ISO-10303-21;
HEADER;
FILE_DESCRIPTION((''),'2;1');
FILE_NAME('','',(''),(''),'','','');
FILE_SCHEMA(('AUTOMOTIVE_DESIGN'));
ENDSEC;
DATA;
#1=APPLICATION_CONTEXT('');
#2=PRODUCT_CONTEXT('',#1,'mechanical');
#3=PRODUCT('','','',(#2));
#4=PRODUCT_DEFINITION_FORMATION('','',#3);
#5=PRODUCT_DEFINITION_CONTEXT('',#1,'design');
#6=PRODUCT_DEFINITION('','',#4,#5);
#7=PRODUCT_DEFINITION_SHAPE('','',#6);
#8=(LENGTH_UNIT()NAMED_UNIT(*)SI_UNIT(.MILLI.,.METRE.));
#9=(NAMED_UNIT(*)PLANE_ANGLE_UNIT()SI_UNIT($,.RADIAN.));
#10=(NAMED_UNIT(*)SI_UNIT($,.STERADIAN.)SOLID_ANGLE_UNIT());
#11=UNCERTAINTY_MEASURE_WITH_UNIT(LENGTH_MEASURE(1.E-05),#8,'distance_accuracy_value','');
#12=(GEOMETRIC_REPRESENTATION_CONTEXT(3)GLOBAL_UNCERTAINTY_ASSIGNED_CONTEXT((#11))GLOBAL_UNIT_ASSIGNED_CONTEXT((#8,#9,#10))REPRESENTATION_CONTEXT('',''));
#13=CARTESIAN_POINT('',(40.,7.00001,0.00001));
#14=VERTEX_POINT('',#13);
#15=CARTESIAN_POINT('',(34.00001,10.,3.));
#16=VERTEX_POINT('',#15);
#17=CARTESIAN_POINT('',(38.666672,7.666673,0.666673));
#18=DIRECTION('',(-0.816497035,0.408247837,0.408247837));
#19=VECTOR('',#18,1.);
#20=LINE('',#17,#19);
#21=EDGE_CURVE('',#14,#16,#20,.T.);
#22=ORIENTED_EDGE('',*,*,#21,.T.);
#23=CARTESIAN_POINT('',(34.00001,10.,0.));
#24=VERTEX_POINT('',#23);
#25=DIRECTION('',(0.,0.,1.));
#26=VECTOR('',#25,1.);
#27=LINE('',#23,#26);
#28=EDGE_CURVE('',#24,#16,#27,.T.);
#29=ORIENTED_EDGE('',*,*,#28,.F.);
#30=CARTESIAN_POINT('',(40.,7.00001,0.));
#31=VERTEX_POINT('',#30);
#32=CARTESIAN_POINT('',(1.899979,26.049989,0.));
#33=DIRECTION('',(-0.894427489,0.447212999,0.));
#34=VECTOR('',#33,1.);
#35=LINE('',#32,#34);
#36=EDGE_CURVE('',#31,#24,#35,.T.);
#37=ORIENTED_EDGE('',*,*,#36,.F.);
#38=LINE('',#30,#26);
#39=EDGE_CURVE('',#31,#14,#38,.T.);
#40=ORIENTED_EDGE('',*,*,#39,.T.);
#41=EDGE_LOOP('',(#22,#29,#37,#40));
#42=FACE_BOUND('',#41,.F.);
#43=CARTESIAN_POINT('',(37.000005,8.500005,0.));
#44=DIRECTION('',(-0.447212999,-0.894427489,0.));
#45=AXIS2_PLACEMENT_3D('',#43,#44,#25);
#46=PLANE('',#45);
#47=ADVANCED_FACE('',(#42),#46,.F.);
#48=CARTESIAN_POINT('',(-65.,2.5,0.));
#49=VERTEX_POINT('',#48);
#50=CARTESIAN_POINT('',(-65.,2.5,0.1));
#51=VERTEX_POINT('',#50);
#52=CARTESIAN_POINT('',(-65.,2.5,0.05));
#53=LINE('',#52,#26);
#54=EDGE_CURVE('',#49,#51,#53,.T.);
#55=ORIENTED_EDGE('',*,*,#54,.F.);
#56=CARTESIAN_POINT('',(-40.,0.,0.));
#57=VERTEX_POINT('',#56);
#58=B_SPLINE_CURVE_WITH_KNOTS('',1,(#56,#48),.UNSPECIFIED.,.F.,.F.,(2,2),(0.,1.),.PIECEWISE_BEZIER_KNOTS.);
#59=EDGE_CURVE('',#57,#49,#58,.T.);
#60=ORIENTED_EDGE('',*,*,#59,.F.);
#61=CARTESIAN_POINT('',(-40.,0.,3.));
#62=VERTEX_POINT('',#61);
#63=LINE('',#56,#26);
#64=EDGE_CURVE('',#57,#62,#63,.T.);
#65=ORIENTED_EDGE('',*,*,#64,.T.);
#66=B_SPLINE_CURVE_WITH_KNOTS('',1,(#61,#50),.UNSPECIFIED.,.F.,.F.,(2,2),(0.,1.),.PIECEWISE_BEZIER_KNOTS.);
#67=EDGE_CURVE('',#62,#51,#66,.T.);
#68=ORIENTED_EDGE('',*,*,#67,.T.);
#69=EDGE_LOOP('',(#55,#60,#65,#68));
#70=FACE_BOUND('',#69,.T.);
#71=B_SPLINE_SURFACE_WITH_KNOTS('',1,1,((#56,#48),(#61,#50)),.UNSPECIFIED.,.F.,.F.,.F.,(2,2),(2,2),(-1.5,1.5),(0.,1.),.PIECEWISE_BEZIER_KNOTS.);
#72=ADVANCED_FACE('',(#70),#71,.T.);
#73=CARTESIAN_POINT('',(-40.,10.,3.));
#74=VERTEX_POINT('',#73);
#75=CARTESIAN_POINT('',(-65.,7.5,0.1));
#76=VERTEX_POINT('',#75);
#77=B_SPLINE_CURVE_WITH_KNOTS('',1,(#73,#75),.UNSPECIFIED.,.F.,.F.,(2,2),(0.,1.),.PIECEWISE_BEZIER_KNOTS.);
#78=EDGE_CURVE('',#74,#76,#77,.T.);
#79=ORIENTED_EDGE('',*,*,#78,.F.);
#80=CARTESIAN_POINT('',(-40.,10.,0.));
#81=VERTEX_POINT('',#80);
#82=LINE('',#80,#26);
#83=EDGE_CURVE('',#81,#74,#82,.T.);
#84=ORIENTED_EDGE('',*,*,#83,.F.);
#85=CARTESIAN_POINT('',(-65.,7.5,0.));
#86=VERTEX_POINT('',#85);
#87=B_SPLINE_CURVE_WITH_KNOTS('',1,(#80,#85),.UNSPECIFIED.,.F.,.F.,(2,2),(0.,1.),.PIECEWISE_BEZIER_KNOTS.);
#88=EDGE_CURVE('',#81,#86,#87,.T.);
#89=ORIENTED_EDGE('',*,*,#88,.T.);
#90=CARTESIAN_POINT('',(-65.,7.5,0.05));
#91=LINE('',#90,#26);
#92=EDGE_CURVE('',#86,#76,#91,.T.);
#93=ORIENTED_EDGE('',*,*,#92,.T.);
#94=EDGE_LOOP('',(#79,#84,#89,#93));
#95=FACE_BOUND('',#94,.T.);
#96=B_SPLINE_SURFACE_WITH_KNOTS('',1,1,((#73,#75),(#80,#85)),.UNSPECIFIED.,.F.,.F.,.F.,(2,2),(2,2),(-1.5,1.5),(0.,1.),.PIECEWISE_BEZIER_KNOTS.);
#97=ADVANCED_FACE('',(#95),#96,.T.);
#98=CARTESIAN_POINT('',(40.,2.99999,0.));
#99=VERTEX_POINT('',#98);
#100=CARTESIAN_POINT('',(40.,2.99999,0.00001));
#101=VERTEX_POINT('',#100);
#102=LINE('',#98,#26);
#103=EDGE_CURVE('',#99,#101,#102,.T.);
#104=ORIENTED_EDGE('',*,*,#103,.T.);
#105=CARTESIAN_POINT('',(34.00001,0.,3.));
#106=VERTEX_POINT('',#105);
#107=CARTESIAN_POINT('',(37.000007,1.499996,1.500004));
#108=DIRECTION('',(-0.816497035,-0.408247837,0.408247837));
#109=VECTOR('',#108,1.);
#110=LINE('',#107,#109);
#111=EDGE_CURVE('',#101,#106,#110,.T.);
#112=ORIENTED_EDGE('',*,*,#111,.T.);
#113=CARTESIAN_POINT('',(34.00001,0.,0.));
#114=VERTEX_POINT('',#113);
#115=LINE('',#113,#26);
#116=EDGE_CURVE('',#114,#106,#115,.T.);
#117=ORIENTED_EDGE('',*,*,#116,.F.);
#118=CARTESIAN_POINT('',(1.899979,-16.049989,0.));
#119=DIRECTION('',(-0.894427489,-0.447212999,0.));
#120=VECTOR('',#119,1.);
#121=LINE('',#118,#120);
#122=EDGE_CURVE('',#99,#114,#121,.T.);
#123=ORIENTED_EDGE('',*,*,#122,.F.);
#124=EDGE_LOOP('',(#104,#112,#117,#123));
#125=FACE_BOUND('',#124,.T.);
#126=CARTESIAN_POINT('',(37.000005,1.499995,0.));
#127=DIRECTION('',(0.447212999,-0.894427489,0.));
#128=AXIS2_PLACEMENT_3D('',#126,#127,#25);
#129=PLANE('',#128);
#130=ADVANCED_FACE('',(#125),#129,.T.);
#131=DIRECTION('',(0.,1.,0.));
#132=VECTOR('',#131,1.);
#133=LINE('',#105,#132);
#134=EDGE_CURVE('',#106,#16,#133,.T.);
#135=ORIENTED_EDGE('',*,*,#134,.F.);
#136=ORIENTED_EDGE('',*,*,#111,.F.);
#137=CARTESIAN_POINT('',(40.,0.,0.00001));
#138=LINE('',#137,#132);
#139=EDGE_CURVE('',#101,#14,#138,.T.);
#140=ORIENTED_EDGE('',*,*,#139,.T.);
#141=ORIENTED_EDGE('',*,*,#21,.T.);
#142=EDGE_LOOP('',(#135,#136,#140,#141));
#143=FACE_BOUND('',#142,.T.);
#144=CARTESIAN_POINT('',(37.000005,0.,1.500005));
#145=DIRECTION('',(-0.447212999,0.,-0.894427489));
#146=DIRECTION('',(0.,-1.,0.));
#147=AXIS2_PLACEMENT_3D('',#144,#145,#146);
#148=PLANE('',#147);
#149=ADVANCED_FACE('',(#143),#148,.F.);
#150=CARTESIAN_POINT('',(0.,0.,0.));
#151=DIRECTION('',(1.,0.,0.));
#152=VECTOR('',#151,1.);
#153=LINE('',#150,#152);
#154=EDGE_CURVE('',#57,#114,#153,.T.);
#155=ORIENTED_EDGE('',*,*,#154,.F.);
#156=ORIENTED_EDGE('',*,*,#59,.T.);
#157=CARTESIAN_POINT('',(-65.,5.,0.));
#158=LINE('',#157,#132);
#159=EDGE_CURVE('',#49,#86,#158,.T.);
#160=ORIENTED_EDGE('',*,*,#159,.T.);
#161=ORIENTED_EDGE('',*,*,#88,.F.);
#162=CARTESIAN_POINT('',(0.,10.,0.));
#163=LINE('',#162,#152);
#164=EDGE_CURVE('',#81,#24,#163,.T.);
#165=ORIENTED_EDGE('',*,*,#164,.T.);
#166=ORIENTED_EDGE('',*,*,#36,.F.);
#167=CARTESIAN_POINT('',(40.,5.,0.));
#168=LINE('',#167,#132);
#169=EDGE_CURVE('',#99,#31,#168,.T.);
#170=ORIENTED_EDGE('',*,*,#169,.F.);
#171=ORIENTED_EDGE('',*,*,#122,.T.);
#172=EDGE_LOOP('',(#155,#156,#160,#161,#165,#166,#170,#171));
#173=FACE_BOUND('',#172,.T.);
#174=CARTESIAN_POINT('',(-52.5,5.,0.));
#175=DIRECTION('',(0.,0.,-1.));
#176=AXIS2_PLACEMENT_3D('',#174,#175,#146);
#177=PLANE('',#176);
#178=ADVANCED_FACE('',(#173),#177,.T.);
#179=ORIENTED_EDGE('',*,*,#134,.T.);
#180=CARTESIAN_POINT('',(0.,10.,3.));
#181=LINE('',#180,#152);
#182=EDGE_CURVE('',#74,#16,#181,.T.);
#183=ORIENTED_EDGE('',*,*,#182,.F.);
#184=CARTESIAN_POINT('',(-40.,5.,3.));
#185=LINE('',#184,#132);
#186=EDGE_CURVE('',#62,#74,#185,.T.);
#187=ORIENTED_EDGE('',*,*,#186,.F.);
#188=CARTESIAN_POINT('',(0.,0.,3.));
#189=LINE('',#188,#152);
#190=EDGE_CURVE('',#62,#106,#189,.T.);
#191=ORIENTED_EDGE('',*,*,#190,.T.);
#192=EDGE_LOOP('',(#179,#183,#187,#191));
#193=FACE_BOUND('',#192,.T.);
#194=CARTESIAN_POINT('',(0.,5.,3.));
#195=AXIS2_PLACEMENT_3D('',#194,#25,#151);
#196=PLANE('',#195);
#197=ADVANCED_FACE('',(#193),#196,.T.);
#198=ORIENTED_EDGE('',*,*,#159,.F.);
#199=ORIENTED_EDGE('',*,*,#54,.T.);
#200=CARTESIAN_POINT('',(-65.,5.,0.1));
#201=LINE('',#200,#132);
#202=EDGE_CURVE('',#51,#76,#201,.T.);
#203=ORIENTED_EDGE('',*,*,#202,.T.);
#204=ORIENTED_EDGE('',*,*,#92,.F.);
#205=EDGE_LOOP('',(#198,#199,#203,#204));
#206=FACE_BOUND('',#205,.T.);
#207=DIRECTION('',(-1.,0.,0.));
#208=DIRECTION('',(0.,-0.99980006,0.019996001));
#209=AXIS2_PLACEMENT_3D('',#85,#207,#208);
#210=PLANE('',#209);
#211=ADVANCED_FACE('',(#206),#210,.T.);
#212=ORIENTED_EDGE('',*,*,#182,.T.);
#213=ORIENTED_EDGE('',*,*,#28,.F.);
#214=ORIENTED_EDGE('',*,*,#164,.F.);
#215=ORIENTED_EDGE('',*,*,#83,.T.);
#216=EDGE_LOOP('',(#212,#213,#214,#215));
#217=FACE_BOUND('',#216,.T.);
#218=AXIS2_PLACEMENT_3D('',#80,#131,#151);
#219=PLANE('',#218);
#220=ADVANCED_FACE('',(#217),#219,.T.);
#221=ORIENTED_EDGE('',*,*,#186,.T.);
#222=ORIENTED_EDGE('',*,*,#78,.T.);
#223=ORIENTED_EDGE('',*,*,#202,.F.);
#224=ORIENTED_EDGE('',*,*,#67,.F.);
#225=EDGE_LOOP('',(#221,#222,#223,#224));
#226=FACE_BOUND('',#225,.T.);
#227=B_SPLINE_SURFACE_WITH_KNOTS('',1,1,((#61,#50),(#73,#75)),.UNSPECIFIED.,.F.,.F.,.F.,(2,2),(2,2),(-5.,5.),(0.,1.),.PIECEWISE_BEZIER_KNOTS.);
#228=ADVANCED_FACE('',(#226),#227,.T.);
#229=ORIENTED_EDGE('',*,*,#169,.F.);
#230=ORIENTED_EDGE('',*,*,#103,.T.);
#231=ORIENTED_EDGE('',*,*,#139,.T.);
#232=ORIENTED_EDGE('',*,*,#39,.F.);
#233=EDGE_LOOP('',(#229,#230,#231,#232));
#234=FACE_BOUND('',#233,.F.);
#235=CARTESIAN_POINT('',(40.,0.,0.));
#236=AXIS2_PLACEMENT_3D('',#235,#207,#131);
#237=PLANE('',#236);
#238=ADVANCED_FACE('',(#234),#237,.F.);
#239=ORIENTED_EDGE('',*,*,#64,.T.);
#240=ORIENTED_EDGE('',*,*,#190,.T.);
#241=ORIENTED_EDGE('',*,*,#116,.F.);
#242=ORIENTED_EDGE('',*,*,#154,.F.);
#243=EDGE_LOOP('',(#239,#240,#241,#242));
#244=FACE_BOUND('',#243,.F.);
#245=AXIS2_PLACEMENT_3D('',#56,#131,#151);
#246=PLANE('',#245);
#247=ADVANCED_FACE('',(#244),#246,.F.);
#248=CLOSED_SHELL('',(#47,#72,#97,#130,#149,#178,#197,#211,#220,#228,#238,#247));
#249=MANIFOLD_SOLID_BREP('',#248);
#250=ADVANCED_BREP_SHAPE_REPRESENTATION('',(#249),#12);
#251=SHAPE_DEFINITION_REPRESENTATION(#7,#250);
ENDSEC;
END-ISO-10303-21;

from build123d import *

# Parameters (mm, degrees)
F0_W      = 80
F0_H      = 10
F1_DEPTH  = 3
F1_FACE_W = 10
F1_FACE_H = 3
F3_W      = 5
F3_H      = 0.1
F5_SIZE2  = 5.99999
F5_SIZE   = 2.99999


# Not quite as in the source:
# - a fillet or chamfer is up to 0.001 mm smaller than in the source, because OpenCascade refuses the exact size


with BuildPart() as f1:
    # F0 (on Top) → F1 (new body)
    with BuildSketch(Plane.XY):
        with Locations((0, 5)):
            Rectangle(F0_W, F0_H)
    extrude(amount=F1_DEPTH)

    # F1_face (on face) → F4 section 0
    with BuildSketch(Plane(origin=(-40, 5, 1.5), x_dir=(0, -1, 0), z_dir=(-1, 0, 0))):
        Rectangle(F1_FACE_W, F1_FACE_H)
    # F3 (on plane+point) → F4 section 1
    with BuildSketch(Plane.YZ.offset(-65)):
        with Locations((5, 0.05)):
            Rectangle(F3_W, F3_H)
    loft()

    # F5 (size 3 and 6 in the source; OpenCascade refuses exactly that, so slightly less here)
    f5_edges = [f1.edges().sort_by_distance(p)[0] for p in [
        (40, 5, 3),
        (40, 0, 1.5),
        (40, 10, 1.5),
    ]]
    f5_side = f1.faces().sort_by_distance((40, 5, 1.5))[0]
    chamfer(f5_edges, length=F5_SIZE, length2=F5_SIZE2, reference=f5_side)


solid = f1.part
